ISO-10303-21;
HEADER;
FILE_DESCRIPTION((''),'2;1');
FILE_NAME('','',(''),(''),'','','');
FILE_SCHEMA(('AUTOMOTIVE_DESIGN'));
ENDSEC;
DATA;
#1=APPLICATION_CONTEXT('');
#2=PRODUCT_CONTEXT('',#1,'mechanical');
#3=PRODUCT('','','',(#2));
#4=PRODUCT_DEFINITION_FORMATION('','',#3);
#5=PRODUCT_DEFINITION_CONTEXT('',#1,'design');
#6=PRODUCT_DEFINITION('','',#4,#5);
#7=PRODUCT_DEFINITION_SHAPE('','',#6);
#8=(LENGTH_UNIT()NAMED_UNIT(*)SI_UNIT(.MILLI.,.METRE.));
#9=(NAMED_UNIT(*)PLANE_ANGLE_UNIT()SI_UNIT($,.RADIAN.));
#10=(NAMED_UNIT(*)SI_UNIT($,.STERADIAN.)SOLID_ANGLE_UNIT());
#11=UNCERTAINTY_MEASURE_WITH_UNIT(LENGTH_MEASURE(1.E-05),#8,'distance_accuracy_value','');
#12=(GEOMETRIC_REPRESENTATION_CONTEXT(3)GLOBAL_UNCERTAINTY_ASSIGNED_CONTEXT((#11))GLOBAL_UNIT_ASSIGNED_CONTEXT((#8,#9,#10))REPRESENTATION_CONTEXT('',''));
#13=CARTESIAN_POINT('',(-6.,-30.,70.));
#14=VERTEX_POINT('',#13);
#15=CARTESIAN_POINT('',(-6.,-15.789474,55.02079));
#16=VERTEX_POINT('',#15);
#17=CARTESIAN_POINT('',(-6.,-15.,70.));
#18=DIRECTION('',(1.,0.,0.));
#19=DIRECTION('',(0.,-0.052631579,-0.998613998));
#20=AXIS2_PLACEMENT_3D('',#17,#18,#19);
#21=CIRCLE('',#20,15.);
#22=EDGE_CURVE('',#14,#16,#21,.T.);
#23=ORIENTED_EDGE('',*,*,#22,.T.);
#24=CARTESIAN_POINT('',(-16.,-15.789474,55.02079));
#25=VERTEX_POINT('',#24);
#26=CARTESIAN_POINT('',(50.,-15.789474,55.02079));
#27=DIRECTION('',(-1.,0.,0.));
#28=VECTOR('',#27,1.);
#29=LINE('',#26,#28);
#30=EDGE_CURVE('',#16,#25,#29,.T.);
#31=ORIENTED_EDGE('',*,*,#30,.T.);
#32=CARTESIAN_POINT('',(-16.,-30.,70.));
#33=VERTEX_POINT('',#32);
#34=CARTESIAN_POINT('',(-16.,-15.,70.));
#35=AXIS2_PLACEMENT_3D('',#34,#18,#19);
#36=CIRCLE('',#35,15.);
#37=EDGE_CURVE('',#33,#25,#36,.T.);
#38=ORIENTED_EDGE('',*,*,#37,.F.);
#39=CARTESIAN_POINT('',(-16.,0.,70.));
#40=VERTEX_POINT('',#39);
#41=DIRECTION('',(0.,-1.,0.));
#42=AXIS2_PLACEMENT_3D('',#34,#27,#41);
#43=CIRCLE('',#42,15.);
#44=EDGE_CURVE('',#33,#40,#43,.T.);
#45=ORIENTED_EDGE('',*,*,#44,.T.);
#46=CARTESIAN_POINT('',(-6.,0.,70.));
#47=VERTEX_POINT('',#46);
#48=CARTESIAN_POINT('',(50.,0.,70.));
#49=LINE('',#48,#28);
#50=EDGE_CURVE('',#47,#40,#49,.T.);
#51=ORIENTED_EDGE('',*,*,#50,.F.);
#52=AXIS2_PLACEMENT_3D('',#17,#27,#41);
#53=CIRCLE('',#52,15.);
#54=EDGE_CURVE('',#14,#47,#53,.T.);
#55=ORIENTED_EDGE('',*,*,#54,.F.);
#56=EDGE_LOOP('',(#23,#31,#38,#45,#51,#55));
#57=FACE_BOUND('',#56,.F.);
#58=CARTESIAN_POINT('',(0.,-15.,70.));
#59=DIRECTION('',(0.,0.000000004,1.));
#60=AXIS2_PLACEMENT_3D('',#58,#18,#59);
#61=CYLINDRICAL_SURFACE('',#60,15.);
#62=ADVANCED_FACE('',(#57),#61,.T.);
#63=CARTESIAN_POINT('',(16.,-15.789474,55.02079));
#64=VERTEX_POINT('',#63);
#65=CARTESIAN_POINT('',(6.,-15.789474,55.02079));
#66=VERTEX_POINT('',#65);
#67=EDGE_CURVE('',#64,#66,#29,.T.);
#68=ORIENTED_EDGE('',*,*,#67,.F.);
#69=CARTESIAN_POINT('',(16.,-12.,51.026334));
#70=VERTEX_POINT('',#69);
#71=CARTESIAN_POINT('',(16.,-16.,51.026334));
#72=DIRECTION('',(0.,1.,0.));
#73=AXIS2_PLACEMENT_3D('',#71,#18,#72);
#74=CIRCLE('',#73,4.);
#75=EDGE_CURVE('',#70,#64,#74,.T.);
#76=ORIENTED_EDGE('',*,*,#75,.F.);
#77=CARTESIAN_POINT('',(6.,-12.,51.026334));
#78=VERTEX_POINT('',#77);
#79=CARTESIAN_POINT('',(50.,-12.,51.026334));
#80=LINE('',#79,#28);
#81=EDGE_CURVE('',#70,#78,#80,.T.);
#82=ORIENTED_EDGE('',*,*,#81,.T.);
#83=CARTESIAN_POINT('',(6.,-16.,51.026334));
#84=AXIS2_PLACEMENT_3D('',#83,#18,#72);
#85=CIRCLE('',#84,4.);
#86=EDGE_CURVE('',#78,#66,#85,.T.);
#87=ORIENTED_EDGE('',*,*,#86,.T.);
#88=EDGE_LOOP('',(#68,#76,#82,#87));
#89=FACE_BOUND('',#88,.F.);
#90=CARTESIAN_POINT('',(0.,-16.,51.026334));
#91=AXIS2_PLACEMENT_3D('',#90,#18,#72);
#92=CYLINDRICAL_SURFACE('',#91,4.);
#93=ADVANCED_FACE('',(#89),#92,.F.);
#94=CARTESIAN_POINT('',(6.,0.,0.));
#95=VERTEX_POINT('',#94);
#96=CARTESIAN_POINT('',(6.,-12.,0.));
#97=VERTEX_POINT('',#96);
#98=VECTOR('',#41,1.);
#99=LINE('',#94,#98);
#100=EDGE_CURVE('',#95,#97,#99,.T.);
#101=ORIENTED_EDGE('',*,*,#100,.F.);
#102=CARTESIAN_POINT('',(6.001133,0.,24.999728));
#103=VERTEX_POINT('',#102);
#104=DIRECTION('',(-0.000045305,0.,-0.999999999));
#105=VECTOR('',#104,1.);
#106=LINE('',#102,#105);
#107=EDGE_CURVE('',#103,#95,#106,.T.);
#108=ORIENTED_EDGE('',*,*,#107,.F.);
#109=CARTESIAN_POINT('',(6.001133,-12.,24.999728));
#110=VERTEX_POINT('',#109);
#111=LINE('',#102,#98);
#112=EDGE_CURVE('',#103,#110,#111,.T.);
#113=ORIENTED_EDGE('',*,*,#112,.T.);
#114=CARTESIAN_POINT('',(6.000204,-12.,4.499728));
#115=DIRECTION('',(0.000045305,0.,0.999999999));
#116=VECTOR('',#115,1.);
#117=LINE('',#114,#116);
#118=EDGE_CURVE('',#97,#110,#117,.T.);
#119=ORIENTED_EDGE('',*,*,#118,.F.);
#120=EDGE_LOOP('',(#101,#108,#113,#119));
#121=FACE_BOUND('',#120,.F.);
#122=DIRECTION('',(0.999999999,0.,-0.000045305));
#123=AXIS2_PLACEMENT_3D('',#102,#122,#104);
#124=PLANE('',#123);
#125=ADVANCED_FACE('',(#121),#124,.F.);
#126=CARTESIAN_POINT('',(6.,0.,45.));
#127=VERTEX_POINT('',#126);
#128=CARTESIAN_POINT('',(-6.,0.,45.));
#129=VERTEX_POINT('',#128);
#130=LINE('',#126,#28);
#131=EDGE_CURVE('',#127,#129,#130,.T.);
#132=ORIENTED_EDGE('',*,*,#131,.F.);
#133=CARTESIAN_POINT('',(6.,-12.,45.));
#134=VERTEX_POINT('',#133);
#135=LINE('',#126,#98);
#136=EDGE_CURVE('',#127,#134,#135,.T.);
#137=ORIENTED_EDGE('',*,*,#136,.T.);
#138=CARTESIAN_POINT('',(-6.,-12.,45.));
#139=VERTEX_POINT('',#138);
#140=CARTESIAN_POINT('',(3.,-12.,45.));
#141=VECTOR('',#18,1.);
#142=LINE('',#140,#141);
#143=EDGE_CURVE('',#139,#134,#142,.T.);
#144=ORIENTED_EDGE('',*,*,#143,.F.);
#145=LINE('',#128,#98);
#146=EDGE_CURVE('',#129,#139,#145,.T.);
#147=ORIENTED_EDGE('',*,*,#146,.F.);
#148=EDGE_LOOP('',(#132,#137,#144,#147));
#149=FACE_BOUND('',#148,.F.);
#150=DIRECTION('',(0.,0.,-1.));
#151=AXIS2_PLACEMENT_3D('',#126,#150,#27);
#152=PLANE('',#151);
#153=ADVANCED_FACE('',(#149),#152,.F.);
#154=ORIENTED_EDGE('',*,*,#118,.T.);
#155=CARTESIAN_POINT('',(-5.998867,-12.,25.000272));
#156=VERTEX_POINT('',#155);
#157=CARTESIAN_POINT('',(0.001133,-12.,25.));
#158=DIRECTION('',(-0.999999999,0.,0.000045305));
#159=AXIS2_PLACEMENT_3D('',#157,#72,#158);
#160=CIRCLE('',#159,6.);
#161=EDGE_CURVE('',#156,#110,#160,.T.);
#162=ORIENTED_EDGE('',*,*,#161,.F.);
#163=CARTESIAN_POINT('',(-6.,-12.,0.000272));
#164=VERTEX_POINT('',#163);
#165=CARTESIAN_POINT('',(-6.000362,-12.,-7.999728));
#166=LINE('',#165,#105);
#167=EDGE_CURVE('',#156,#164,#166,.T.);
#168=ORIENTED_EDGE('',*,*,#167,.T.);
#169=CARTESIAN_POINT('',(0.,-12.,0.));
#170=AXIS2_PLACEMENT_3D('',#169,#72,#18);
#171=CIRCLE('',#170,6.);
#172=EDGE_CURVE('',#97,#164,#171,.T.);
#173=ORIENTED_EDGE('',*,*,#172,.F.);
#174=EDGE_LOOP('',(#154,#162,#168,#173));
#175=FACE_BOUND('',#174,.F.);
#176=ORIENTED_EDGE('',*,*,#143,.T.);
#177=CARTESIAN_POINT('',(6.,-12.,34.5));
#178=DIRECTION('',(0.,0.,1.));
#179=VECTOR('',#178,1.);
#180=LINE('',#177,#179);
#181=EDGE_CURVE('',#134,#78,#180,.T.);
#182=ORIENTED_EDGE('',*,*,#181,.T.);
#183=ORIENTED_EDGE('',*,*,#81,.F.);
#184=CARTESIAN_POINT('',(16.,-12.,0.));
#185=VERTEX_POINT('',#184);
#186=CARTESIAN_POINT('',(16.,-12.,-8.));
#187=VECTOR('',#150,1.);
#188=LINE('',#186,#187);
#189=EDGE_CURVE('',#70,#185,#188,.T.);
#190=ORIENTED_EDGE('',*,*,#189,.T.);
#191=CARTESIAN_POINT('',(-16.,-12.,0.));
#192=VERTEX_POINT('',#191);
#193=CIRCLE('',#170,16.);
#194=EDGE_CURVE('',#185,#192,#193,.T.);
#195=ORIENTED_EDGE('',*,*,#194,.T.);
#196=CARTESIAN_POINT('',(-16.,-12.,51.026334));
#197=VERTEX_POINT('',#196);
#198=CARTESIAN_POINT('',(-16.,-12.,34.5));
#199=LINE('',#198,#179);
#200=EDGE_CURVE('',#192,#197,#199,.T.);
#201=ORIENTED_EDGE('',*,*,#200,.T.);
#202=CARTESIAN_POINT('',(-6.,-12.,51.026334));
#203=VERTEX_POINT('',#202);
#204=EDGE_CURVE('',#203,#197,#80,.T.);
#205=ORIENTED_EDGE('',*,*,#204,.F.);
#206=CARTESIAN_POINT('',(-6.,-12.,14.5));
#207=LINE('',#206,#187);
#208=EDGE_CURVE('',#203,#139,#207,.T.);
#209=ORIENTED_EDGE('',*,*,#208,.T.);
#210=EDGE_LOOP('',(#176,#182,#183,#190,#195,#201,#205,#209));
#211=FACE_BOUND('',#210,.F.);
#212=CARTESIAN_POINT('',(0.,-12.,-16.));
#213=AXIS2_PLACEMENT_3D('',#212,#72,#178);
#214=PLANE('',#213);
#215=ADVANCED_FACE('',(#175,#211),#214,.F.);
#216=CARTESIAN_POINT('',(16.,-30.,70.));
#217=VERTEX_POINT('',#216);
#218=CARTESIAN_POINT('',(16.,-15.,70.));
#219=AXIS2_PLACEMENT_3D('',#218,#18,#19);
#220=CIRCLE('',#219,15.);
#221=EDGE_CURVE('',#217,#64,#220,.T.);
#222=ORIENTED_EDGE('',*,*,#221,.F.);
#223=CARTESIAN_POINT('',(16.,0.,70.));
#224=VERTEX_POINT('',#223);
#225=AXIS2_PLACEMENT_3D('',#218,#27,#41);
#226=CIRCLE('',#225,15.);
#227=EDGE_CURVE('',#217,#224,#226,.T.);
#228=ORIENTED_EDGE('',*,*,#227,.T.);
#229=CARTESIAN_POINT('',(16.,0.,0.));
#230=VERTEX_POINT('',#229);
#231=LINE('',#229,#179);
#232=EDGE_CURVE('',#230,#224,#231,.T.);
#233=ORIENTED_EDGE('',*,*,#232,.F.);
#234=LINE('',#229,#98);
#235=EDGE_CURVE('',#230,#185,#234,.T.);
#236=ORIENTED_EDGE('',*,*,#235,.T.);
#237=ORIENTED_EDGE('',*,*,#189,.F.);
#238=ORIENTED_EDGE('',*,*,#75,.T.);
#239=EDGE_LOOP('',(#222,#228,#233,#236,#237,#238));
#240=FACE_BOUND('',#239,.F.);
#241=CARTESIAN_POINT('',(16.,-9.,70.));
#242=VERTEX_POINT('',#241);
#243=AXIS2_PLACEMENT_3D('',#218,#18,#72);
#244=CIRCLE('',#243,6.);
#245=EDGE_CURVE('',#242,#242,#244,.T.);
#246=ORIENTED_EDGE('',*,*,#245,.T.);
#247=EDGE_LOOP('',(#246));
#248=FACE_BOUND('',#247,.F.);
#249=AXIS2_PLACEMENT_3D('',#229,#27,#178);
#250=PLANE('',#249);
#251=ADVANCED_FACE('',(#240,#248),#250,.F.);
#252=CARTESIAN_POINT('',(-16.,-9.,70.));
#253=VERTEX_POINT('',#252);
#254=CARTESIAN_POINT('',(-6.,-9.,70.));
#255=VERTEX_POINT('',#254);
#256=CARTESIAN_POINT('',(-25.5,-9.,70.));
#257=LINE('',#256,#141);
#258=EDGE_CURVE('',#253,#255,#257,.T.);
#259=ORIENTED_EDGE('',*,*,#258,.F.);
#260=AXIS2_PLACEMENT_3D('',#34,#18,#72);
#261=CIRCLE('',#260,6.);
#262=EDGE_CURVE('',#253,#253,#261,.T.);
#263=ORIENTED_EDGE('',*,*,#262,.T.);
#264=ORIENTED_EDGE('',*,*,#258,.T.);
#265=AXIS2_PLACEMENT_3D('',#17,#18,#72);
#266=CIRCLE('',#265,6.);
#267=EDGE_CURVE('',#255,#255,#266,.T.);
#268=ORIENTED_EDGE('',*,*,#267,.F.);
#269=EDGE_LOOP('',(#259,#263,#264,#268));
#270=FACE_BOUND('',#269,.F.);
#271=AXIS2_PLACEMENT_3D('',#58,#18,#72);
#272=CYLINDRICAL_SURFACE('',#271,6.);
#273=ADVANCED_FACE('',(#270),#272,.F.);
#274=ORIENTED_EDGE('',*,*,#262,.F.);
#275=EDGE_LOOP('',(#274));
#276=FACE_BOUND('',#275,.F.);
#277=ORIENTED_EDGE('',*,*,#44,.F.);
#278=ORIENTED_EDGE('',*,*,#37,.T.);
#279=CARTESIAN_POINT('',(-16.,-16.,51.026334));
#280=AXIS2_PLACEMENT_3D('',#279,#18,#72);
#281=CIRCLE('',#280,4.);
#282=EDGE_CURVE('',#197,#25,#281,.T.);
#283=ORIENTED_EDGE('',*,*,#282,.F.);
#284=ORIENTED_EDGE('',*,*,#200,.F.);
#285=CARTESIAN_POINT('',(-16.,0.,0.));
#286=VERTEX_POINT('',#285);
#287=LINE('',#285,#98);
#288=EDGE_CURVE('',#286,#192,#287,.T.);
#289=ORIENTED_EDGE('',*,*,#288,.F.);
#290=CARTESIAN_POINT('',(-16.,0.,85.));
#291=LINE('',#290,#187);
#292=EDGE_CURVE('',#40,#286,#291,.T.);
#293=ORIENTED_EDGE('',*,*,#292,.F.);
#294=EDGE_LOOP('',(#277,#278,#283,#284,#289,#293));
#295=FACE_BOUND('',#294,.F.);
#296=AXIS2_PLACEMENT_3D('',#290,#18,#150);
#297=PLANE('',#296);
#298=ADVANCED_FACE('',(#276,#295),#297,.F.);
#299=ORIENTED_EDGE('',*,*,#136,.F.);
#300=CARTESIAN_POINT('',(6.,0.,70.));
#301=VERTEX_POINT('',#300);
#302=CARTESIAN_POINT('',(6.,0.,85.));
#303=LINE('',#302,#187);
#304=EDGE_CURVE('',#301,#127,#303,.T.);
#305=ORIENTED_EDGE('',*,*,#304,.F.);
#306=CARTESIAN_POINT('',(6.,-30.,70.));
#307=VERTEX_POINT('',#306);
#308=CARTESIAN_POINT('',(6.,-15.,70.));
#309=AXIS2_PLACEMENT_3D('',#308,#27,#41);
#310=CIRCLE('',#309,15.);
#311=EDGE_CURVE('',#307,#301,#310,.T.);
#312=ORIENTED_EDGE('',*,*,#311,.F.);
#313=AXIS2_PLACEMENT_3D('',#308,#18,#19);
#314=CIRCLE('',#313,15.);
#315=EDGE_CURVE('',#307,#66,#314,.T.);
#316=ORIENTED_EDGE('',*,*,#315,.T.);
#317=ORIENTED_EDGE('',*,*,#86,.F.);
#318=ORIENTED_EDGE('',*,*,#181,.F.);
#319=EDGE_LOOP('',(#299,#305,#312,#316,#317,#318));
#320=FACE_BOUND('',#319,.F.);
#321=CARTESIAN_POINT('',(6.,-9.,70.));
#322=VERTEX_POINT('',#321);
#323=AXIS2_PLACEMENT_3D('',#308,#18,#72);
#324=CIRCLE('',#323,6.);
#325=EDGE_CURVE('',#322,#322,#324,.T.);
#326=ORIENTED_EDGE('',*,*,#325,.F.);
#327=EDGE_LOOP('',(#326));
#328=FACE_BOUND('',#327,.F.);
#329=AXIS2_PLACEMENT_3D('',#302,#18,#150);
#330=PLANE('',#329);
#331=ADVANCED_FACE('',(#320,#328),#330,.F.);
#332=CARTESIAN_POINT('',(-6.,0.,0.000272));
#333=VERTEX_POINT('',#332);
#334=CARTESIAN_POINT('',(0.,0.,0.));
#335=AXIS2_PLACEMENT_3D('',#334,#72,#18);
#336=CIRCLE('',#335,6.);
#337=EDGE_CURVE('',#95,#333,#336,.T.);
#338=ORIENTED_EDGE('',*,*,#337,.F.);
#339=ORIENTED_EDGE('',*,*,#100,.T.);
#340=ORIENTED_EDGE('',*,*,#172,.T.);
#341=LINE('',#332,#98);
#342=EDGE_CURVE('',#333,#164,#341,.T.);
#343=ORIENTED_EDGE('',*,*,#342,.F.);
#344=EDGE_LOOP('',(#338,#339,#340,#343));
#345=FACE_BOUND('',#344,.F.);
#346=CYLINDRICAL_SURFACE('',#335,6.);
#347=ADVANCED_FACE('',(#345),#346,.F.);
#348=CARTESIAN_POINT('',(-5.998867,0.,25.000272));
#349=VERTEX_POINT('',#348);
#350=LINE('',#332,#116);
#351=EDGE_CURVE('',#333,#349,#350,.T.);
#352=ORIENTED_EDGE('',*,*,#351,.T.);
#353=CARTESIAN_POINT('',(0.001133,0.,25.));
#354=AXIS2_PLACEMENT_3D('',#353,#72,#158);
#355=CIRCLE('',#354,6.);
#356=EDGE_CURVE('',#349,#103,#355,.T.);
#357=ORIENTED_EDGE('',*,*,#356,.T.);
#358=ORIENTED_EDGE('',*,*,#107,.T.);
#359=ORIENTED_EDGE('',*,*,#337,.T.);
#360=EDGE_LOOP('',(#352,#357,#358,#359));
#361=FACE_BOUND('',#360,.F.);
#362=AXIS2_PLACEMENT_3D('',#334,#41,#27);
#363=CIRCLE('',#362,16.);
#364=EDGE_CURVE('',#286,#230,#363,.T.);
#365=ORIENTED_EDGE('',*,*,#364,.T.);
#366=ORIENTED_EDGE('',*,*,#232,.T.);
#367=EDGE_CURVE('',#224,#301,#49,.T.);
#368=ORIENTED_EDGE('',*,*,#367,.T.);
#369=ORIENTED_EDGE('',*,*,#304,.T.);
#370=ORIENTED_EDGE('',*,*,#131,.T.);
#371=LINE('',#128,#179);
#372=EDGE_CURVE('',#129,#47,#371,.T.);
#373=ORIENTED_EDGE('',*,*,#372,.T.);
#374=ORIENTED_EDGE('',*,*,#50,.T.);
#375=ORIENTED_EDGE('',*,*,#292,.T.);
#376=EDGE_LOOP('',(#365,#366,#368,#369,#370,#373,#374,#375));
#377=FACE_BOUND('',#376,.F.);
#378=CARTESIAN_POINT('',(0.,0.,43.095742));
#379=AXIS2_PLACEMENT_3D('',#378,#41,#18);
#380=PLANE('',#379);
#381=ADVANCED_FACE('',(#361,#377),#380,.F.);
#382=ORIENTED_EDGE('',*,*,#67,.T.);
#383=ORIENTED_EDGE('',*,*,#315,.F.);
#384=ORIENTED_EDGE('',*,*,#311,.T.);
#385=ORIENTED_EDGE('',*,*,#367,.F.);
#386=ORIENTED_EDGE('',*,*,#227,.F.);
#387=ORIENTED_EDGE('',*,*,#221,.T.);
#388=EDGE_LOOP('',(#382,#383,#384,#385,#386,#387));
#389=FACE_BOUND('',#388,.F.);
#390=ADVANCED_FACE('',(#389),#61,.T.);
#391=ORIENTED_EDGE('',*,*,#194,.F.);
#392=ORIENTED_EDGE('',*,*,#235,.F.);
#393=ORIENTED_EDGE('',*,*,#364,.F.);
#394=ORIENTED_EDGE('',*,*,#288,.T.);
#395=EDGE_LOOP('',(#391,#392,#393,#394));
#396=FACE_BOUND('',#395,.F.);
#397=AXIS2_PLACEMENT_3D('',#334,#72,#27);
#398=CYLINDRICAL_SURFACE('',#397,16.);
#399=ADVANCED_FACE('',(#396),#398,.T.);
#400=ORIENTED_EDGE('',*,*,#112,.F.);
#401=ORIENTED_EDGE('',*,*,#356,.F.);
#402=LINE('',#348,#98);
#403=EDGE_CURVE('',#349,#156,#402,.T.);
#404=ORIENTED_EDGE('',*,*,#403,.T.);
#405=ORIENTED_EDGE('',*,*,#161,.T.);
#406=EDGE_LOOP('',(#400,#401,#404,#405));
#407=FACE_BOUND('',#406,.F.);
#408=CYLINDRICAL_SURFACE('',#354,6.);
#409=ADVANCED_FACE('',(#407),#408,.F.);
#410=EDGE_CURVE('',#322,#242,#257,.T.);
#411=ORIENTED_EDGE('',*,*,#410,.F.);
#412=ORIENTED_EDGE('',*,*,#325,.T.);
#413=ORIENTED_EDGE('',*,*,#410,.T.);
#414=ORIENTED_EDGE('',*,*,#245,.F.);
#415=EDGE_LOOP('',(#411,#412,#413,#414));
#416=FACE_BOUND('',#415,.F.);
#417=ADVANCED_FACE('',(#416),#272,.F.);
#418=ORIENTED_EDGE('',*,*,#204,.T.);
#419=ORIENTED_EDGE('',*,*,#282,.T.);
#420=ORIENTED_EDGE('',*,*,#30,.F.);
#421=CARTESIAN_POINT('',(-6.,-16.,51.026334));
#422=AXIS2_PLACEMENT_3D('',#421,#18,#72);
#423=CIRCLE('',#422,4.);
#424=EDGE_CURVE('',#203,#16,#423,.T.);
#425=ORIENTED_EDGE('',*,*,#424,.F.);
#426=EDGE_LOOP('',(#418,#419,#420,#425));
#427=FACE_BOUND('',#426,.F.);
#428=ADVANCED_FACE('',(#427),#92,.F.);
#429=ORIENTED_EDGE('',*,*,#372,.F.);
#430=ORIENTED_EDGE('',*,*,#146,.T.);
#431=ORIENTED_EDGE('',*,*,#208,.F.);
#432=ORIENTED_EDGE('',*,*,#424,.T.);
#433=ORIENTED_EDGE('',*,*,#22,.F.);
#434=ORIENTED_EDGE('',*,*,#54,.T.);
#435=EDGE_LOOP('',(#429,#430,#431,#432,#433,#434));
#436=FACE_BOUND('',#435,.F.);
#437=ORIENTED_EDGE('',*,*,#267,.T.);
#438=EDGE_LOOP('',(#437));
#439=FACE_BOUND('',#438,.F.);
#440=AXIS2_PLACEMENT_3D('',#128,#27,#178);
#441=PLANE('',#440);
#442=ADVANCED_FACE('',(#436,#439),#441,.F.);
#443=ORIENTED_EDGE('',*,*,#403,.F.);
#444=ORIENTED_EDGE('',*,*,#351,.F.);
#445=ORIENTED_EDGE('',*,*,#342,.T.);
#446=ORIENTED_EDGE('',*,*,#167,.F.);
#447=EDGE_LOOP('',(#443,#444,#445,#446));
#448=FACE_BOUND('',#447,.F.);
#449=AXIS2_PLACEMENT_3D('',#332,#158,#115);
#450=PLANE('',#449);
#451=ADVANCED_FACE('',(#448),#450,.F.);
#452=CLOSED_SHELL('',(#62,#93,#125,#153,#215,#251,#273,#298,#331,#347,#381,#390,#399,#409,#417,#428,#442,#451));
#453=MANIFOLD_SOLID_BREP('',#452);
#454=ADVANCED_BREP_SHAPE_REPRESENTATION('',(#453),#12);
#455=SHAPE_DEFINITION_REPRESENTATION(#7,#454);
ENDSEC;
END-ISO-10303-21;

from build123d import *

# Parameters (mm, degrees)
F1_DEPTH = 30
F3_DEPTH = 50
F2_R     = 6
F4_DEPTH = 25.5


# Not quite as in the source:
# - a feature of the source that left no trace in its solid (it failed there, or was rolled back) is left out


with BuildPart() as f1:
    # F0 (on Front) → F1 (new body)
    with BuildSketch(Plane.XZ):
        with BuildLine():
            Line((-16, 85), (-16, 0))
            ThreePointArc((-16, 0), (0, -16), (16, 0))
            Line((16, 0), (16, 85))
            Line((16, 85), (6, 85))
            Line((6, 85), (6, 45))
            Line((6, 45), (-6, 45))
            Line((-6, 45), (-6, 85))
            Line((-6, 85), (-16, 85))
        make_face()
        with BuildLine():
            ThreePointArc((6, 1.3e-09), (-0.0001359155, -5.9999999985), (-5.9999999938, 0.0002718323))
            Line((-5.9999999938, 0.0002718323), (-5.9988673594, 25.0002718323))
            ThreePointArc((-5.9988673594, 25.0002718323), (0.0014044667, 30.9999999938), (6.0011326283, 24.9997281677))
            Line((6.0011326283, 24.9997281677), (6.0000000062, 0))
        make_face(mode=Mode.SUBTRACT)
    extrude(amount=F1_DEPTH)

    # F2 (on Right) → F3 (cut, symmetric)
    with BuildSketch(Plane.YZ):
        with BuildLine():
            ThreePointArc((-15.7894736842, 55.0207900308), (-25.8821437517, 59.6762919758), (-30, 70))
            Line((-30, 70), (-30, -16))
            Line((-30, -16), (-12, -16))
            Line((-12, -16), (-12, 51.026334039))
            ThreePointArc((-12, 51.026334039), (-13.0980949996, 53.7793228454), (-15.7894736842, 55.0207900308))
        make_face()
        with BuildLine():
            Line((-30, 85), (-30, 70))
            ThreePointArc((-30, 70), (-25.6066016991, 80.6066017365), (-14.9999999471, 85))
            Line((-14.9999999471, 85), (-30, 85))
        make_face()
        with BuildLine():
            Line((0, 85), (-14.9999999471, 85))
            ThreePointArc((-14.9999999471, 85), (-4.3933982635, 80.6066016991), (0, 70))
            Line((0, 70), (0, 85))
        make_face()
    extrude(amount=F3_DEPTH, both=True, mode=Mode.SUBTRACT)

    # F2 (on Right) → F4 (cut, symmetric)
    with BuildSketch(Plane.YZ):
        with Locations((-15, 70)):
            Circle(F2_R)
    extrude(amount=F4_DEPTH, both=True, mode=Mode.SUBTRACT)


solid = f1.part
